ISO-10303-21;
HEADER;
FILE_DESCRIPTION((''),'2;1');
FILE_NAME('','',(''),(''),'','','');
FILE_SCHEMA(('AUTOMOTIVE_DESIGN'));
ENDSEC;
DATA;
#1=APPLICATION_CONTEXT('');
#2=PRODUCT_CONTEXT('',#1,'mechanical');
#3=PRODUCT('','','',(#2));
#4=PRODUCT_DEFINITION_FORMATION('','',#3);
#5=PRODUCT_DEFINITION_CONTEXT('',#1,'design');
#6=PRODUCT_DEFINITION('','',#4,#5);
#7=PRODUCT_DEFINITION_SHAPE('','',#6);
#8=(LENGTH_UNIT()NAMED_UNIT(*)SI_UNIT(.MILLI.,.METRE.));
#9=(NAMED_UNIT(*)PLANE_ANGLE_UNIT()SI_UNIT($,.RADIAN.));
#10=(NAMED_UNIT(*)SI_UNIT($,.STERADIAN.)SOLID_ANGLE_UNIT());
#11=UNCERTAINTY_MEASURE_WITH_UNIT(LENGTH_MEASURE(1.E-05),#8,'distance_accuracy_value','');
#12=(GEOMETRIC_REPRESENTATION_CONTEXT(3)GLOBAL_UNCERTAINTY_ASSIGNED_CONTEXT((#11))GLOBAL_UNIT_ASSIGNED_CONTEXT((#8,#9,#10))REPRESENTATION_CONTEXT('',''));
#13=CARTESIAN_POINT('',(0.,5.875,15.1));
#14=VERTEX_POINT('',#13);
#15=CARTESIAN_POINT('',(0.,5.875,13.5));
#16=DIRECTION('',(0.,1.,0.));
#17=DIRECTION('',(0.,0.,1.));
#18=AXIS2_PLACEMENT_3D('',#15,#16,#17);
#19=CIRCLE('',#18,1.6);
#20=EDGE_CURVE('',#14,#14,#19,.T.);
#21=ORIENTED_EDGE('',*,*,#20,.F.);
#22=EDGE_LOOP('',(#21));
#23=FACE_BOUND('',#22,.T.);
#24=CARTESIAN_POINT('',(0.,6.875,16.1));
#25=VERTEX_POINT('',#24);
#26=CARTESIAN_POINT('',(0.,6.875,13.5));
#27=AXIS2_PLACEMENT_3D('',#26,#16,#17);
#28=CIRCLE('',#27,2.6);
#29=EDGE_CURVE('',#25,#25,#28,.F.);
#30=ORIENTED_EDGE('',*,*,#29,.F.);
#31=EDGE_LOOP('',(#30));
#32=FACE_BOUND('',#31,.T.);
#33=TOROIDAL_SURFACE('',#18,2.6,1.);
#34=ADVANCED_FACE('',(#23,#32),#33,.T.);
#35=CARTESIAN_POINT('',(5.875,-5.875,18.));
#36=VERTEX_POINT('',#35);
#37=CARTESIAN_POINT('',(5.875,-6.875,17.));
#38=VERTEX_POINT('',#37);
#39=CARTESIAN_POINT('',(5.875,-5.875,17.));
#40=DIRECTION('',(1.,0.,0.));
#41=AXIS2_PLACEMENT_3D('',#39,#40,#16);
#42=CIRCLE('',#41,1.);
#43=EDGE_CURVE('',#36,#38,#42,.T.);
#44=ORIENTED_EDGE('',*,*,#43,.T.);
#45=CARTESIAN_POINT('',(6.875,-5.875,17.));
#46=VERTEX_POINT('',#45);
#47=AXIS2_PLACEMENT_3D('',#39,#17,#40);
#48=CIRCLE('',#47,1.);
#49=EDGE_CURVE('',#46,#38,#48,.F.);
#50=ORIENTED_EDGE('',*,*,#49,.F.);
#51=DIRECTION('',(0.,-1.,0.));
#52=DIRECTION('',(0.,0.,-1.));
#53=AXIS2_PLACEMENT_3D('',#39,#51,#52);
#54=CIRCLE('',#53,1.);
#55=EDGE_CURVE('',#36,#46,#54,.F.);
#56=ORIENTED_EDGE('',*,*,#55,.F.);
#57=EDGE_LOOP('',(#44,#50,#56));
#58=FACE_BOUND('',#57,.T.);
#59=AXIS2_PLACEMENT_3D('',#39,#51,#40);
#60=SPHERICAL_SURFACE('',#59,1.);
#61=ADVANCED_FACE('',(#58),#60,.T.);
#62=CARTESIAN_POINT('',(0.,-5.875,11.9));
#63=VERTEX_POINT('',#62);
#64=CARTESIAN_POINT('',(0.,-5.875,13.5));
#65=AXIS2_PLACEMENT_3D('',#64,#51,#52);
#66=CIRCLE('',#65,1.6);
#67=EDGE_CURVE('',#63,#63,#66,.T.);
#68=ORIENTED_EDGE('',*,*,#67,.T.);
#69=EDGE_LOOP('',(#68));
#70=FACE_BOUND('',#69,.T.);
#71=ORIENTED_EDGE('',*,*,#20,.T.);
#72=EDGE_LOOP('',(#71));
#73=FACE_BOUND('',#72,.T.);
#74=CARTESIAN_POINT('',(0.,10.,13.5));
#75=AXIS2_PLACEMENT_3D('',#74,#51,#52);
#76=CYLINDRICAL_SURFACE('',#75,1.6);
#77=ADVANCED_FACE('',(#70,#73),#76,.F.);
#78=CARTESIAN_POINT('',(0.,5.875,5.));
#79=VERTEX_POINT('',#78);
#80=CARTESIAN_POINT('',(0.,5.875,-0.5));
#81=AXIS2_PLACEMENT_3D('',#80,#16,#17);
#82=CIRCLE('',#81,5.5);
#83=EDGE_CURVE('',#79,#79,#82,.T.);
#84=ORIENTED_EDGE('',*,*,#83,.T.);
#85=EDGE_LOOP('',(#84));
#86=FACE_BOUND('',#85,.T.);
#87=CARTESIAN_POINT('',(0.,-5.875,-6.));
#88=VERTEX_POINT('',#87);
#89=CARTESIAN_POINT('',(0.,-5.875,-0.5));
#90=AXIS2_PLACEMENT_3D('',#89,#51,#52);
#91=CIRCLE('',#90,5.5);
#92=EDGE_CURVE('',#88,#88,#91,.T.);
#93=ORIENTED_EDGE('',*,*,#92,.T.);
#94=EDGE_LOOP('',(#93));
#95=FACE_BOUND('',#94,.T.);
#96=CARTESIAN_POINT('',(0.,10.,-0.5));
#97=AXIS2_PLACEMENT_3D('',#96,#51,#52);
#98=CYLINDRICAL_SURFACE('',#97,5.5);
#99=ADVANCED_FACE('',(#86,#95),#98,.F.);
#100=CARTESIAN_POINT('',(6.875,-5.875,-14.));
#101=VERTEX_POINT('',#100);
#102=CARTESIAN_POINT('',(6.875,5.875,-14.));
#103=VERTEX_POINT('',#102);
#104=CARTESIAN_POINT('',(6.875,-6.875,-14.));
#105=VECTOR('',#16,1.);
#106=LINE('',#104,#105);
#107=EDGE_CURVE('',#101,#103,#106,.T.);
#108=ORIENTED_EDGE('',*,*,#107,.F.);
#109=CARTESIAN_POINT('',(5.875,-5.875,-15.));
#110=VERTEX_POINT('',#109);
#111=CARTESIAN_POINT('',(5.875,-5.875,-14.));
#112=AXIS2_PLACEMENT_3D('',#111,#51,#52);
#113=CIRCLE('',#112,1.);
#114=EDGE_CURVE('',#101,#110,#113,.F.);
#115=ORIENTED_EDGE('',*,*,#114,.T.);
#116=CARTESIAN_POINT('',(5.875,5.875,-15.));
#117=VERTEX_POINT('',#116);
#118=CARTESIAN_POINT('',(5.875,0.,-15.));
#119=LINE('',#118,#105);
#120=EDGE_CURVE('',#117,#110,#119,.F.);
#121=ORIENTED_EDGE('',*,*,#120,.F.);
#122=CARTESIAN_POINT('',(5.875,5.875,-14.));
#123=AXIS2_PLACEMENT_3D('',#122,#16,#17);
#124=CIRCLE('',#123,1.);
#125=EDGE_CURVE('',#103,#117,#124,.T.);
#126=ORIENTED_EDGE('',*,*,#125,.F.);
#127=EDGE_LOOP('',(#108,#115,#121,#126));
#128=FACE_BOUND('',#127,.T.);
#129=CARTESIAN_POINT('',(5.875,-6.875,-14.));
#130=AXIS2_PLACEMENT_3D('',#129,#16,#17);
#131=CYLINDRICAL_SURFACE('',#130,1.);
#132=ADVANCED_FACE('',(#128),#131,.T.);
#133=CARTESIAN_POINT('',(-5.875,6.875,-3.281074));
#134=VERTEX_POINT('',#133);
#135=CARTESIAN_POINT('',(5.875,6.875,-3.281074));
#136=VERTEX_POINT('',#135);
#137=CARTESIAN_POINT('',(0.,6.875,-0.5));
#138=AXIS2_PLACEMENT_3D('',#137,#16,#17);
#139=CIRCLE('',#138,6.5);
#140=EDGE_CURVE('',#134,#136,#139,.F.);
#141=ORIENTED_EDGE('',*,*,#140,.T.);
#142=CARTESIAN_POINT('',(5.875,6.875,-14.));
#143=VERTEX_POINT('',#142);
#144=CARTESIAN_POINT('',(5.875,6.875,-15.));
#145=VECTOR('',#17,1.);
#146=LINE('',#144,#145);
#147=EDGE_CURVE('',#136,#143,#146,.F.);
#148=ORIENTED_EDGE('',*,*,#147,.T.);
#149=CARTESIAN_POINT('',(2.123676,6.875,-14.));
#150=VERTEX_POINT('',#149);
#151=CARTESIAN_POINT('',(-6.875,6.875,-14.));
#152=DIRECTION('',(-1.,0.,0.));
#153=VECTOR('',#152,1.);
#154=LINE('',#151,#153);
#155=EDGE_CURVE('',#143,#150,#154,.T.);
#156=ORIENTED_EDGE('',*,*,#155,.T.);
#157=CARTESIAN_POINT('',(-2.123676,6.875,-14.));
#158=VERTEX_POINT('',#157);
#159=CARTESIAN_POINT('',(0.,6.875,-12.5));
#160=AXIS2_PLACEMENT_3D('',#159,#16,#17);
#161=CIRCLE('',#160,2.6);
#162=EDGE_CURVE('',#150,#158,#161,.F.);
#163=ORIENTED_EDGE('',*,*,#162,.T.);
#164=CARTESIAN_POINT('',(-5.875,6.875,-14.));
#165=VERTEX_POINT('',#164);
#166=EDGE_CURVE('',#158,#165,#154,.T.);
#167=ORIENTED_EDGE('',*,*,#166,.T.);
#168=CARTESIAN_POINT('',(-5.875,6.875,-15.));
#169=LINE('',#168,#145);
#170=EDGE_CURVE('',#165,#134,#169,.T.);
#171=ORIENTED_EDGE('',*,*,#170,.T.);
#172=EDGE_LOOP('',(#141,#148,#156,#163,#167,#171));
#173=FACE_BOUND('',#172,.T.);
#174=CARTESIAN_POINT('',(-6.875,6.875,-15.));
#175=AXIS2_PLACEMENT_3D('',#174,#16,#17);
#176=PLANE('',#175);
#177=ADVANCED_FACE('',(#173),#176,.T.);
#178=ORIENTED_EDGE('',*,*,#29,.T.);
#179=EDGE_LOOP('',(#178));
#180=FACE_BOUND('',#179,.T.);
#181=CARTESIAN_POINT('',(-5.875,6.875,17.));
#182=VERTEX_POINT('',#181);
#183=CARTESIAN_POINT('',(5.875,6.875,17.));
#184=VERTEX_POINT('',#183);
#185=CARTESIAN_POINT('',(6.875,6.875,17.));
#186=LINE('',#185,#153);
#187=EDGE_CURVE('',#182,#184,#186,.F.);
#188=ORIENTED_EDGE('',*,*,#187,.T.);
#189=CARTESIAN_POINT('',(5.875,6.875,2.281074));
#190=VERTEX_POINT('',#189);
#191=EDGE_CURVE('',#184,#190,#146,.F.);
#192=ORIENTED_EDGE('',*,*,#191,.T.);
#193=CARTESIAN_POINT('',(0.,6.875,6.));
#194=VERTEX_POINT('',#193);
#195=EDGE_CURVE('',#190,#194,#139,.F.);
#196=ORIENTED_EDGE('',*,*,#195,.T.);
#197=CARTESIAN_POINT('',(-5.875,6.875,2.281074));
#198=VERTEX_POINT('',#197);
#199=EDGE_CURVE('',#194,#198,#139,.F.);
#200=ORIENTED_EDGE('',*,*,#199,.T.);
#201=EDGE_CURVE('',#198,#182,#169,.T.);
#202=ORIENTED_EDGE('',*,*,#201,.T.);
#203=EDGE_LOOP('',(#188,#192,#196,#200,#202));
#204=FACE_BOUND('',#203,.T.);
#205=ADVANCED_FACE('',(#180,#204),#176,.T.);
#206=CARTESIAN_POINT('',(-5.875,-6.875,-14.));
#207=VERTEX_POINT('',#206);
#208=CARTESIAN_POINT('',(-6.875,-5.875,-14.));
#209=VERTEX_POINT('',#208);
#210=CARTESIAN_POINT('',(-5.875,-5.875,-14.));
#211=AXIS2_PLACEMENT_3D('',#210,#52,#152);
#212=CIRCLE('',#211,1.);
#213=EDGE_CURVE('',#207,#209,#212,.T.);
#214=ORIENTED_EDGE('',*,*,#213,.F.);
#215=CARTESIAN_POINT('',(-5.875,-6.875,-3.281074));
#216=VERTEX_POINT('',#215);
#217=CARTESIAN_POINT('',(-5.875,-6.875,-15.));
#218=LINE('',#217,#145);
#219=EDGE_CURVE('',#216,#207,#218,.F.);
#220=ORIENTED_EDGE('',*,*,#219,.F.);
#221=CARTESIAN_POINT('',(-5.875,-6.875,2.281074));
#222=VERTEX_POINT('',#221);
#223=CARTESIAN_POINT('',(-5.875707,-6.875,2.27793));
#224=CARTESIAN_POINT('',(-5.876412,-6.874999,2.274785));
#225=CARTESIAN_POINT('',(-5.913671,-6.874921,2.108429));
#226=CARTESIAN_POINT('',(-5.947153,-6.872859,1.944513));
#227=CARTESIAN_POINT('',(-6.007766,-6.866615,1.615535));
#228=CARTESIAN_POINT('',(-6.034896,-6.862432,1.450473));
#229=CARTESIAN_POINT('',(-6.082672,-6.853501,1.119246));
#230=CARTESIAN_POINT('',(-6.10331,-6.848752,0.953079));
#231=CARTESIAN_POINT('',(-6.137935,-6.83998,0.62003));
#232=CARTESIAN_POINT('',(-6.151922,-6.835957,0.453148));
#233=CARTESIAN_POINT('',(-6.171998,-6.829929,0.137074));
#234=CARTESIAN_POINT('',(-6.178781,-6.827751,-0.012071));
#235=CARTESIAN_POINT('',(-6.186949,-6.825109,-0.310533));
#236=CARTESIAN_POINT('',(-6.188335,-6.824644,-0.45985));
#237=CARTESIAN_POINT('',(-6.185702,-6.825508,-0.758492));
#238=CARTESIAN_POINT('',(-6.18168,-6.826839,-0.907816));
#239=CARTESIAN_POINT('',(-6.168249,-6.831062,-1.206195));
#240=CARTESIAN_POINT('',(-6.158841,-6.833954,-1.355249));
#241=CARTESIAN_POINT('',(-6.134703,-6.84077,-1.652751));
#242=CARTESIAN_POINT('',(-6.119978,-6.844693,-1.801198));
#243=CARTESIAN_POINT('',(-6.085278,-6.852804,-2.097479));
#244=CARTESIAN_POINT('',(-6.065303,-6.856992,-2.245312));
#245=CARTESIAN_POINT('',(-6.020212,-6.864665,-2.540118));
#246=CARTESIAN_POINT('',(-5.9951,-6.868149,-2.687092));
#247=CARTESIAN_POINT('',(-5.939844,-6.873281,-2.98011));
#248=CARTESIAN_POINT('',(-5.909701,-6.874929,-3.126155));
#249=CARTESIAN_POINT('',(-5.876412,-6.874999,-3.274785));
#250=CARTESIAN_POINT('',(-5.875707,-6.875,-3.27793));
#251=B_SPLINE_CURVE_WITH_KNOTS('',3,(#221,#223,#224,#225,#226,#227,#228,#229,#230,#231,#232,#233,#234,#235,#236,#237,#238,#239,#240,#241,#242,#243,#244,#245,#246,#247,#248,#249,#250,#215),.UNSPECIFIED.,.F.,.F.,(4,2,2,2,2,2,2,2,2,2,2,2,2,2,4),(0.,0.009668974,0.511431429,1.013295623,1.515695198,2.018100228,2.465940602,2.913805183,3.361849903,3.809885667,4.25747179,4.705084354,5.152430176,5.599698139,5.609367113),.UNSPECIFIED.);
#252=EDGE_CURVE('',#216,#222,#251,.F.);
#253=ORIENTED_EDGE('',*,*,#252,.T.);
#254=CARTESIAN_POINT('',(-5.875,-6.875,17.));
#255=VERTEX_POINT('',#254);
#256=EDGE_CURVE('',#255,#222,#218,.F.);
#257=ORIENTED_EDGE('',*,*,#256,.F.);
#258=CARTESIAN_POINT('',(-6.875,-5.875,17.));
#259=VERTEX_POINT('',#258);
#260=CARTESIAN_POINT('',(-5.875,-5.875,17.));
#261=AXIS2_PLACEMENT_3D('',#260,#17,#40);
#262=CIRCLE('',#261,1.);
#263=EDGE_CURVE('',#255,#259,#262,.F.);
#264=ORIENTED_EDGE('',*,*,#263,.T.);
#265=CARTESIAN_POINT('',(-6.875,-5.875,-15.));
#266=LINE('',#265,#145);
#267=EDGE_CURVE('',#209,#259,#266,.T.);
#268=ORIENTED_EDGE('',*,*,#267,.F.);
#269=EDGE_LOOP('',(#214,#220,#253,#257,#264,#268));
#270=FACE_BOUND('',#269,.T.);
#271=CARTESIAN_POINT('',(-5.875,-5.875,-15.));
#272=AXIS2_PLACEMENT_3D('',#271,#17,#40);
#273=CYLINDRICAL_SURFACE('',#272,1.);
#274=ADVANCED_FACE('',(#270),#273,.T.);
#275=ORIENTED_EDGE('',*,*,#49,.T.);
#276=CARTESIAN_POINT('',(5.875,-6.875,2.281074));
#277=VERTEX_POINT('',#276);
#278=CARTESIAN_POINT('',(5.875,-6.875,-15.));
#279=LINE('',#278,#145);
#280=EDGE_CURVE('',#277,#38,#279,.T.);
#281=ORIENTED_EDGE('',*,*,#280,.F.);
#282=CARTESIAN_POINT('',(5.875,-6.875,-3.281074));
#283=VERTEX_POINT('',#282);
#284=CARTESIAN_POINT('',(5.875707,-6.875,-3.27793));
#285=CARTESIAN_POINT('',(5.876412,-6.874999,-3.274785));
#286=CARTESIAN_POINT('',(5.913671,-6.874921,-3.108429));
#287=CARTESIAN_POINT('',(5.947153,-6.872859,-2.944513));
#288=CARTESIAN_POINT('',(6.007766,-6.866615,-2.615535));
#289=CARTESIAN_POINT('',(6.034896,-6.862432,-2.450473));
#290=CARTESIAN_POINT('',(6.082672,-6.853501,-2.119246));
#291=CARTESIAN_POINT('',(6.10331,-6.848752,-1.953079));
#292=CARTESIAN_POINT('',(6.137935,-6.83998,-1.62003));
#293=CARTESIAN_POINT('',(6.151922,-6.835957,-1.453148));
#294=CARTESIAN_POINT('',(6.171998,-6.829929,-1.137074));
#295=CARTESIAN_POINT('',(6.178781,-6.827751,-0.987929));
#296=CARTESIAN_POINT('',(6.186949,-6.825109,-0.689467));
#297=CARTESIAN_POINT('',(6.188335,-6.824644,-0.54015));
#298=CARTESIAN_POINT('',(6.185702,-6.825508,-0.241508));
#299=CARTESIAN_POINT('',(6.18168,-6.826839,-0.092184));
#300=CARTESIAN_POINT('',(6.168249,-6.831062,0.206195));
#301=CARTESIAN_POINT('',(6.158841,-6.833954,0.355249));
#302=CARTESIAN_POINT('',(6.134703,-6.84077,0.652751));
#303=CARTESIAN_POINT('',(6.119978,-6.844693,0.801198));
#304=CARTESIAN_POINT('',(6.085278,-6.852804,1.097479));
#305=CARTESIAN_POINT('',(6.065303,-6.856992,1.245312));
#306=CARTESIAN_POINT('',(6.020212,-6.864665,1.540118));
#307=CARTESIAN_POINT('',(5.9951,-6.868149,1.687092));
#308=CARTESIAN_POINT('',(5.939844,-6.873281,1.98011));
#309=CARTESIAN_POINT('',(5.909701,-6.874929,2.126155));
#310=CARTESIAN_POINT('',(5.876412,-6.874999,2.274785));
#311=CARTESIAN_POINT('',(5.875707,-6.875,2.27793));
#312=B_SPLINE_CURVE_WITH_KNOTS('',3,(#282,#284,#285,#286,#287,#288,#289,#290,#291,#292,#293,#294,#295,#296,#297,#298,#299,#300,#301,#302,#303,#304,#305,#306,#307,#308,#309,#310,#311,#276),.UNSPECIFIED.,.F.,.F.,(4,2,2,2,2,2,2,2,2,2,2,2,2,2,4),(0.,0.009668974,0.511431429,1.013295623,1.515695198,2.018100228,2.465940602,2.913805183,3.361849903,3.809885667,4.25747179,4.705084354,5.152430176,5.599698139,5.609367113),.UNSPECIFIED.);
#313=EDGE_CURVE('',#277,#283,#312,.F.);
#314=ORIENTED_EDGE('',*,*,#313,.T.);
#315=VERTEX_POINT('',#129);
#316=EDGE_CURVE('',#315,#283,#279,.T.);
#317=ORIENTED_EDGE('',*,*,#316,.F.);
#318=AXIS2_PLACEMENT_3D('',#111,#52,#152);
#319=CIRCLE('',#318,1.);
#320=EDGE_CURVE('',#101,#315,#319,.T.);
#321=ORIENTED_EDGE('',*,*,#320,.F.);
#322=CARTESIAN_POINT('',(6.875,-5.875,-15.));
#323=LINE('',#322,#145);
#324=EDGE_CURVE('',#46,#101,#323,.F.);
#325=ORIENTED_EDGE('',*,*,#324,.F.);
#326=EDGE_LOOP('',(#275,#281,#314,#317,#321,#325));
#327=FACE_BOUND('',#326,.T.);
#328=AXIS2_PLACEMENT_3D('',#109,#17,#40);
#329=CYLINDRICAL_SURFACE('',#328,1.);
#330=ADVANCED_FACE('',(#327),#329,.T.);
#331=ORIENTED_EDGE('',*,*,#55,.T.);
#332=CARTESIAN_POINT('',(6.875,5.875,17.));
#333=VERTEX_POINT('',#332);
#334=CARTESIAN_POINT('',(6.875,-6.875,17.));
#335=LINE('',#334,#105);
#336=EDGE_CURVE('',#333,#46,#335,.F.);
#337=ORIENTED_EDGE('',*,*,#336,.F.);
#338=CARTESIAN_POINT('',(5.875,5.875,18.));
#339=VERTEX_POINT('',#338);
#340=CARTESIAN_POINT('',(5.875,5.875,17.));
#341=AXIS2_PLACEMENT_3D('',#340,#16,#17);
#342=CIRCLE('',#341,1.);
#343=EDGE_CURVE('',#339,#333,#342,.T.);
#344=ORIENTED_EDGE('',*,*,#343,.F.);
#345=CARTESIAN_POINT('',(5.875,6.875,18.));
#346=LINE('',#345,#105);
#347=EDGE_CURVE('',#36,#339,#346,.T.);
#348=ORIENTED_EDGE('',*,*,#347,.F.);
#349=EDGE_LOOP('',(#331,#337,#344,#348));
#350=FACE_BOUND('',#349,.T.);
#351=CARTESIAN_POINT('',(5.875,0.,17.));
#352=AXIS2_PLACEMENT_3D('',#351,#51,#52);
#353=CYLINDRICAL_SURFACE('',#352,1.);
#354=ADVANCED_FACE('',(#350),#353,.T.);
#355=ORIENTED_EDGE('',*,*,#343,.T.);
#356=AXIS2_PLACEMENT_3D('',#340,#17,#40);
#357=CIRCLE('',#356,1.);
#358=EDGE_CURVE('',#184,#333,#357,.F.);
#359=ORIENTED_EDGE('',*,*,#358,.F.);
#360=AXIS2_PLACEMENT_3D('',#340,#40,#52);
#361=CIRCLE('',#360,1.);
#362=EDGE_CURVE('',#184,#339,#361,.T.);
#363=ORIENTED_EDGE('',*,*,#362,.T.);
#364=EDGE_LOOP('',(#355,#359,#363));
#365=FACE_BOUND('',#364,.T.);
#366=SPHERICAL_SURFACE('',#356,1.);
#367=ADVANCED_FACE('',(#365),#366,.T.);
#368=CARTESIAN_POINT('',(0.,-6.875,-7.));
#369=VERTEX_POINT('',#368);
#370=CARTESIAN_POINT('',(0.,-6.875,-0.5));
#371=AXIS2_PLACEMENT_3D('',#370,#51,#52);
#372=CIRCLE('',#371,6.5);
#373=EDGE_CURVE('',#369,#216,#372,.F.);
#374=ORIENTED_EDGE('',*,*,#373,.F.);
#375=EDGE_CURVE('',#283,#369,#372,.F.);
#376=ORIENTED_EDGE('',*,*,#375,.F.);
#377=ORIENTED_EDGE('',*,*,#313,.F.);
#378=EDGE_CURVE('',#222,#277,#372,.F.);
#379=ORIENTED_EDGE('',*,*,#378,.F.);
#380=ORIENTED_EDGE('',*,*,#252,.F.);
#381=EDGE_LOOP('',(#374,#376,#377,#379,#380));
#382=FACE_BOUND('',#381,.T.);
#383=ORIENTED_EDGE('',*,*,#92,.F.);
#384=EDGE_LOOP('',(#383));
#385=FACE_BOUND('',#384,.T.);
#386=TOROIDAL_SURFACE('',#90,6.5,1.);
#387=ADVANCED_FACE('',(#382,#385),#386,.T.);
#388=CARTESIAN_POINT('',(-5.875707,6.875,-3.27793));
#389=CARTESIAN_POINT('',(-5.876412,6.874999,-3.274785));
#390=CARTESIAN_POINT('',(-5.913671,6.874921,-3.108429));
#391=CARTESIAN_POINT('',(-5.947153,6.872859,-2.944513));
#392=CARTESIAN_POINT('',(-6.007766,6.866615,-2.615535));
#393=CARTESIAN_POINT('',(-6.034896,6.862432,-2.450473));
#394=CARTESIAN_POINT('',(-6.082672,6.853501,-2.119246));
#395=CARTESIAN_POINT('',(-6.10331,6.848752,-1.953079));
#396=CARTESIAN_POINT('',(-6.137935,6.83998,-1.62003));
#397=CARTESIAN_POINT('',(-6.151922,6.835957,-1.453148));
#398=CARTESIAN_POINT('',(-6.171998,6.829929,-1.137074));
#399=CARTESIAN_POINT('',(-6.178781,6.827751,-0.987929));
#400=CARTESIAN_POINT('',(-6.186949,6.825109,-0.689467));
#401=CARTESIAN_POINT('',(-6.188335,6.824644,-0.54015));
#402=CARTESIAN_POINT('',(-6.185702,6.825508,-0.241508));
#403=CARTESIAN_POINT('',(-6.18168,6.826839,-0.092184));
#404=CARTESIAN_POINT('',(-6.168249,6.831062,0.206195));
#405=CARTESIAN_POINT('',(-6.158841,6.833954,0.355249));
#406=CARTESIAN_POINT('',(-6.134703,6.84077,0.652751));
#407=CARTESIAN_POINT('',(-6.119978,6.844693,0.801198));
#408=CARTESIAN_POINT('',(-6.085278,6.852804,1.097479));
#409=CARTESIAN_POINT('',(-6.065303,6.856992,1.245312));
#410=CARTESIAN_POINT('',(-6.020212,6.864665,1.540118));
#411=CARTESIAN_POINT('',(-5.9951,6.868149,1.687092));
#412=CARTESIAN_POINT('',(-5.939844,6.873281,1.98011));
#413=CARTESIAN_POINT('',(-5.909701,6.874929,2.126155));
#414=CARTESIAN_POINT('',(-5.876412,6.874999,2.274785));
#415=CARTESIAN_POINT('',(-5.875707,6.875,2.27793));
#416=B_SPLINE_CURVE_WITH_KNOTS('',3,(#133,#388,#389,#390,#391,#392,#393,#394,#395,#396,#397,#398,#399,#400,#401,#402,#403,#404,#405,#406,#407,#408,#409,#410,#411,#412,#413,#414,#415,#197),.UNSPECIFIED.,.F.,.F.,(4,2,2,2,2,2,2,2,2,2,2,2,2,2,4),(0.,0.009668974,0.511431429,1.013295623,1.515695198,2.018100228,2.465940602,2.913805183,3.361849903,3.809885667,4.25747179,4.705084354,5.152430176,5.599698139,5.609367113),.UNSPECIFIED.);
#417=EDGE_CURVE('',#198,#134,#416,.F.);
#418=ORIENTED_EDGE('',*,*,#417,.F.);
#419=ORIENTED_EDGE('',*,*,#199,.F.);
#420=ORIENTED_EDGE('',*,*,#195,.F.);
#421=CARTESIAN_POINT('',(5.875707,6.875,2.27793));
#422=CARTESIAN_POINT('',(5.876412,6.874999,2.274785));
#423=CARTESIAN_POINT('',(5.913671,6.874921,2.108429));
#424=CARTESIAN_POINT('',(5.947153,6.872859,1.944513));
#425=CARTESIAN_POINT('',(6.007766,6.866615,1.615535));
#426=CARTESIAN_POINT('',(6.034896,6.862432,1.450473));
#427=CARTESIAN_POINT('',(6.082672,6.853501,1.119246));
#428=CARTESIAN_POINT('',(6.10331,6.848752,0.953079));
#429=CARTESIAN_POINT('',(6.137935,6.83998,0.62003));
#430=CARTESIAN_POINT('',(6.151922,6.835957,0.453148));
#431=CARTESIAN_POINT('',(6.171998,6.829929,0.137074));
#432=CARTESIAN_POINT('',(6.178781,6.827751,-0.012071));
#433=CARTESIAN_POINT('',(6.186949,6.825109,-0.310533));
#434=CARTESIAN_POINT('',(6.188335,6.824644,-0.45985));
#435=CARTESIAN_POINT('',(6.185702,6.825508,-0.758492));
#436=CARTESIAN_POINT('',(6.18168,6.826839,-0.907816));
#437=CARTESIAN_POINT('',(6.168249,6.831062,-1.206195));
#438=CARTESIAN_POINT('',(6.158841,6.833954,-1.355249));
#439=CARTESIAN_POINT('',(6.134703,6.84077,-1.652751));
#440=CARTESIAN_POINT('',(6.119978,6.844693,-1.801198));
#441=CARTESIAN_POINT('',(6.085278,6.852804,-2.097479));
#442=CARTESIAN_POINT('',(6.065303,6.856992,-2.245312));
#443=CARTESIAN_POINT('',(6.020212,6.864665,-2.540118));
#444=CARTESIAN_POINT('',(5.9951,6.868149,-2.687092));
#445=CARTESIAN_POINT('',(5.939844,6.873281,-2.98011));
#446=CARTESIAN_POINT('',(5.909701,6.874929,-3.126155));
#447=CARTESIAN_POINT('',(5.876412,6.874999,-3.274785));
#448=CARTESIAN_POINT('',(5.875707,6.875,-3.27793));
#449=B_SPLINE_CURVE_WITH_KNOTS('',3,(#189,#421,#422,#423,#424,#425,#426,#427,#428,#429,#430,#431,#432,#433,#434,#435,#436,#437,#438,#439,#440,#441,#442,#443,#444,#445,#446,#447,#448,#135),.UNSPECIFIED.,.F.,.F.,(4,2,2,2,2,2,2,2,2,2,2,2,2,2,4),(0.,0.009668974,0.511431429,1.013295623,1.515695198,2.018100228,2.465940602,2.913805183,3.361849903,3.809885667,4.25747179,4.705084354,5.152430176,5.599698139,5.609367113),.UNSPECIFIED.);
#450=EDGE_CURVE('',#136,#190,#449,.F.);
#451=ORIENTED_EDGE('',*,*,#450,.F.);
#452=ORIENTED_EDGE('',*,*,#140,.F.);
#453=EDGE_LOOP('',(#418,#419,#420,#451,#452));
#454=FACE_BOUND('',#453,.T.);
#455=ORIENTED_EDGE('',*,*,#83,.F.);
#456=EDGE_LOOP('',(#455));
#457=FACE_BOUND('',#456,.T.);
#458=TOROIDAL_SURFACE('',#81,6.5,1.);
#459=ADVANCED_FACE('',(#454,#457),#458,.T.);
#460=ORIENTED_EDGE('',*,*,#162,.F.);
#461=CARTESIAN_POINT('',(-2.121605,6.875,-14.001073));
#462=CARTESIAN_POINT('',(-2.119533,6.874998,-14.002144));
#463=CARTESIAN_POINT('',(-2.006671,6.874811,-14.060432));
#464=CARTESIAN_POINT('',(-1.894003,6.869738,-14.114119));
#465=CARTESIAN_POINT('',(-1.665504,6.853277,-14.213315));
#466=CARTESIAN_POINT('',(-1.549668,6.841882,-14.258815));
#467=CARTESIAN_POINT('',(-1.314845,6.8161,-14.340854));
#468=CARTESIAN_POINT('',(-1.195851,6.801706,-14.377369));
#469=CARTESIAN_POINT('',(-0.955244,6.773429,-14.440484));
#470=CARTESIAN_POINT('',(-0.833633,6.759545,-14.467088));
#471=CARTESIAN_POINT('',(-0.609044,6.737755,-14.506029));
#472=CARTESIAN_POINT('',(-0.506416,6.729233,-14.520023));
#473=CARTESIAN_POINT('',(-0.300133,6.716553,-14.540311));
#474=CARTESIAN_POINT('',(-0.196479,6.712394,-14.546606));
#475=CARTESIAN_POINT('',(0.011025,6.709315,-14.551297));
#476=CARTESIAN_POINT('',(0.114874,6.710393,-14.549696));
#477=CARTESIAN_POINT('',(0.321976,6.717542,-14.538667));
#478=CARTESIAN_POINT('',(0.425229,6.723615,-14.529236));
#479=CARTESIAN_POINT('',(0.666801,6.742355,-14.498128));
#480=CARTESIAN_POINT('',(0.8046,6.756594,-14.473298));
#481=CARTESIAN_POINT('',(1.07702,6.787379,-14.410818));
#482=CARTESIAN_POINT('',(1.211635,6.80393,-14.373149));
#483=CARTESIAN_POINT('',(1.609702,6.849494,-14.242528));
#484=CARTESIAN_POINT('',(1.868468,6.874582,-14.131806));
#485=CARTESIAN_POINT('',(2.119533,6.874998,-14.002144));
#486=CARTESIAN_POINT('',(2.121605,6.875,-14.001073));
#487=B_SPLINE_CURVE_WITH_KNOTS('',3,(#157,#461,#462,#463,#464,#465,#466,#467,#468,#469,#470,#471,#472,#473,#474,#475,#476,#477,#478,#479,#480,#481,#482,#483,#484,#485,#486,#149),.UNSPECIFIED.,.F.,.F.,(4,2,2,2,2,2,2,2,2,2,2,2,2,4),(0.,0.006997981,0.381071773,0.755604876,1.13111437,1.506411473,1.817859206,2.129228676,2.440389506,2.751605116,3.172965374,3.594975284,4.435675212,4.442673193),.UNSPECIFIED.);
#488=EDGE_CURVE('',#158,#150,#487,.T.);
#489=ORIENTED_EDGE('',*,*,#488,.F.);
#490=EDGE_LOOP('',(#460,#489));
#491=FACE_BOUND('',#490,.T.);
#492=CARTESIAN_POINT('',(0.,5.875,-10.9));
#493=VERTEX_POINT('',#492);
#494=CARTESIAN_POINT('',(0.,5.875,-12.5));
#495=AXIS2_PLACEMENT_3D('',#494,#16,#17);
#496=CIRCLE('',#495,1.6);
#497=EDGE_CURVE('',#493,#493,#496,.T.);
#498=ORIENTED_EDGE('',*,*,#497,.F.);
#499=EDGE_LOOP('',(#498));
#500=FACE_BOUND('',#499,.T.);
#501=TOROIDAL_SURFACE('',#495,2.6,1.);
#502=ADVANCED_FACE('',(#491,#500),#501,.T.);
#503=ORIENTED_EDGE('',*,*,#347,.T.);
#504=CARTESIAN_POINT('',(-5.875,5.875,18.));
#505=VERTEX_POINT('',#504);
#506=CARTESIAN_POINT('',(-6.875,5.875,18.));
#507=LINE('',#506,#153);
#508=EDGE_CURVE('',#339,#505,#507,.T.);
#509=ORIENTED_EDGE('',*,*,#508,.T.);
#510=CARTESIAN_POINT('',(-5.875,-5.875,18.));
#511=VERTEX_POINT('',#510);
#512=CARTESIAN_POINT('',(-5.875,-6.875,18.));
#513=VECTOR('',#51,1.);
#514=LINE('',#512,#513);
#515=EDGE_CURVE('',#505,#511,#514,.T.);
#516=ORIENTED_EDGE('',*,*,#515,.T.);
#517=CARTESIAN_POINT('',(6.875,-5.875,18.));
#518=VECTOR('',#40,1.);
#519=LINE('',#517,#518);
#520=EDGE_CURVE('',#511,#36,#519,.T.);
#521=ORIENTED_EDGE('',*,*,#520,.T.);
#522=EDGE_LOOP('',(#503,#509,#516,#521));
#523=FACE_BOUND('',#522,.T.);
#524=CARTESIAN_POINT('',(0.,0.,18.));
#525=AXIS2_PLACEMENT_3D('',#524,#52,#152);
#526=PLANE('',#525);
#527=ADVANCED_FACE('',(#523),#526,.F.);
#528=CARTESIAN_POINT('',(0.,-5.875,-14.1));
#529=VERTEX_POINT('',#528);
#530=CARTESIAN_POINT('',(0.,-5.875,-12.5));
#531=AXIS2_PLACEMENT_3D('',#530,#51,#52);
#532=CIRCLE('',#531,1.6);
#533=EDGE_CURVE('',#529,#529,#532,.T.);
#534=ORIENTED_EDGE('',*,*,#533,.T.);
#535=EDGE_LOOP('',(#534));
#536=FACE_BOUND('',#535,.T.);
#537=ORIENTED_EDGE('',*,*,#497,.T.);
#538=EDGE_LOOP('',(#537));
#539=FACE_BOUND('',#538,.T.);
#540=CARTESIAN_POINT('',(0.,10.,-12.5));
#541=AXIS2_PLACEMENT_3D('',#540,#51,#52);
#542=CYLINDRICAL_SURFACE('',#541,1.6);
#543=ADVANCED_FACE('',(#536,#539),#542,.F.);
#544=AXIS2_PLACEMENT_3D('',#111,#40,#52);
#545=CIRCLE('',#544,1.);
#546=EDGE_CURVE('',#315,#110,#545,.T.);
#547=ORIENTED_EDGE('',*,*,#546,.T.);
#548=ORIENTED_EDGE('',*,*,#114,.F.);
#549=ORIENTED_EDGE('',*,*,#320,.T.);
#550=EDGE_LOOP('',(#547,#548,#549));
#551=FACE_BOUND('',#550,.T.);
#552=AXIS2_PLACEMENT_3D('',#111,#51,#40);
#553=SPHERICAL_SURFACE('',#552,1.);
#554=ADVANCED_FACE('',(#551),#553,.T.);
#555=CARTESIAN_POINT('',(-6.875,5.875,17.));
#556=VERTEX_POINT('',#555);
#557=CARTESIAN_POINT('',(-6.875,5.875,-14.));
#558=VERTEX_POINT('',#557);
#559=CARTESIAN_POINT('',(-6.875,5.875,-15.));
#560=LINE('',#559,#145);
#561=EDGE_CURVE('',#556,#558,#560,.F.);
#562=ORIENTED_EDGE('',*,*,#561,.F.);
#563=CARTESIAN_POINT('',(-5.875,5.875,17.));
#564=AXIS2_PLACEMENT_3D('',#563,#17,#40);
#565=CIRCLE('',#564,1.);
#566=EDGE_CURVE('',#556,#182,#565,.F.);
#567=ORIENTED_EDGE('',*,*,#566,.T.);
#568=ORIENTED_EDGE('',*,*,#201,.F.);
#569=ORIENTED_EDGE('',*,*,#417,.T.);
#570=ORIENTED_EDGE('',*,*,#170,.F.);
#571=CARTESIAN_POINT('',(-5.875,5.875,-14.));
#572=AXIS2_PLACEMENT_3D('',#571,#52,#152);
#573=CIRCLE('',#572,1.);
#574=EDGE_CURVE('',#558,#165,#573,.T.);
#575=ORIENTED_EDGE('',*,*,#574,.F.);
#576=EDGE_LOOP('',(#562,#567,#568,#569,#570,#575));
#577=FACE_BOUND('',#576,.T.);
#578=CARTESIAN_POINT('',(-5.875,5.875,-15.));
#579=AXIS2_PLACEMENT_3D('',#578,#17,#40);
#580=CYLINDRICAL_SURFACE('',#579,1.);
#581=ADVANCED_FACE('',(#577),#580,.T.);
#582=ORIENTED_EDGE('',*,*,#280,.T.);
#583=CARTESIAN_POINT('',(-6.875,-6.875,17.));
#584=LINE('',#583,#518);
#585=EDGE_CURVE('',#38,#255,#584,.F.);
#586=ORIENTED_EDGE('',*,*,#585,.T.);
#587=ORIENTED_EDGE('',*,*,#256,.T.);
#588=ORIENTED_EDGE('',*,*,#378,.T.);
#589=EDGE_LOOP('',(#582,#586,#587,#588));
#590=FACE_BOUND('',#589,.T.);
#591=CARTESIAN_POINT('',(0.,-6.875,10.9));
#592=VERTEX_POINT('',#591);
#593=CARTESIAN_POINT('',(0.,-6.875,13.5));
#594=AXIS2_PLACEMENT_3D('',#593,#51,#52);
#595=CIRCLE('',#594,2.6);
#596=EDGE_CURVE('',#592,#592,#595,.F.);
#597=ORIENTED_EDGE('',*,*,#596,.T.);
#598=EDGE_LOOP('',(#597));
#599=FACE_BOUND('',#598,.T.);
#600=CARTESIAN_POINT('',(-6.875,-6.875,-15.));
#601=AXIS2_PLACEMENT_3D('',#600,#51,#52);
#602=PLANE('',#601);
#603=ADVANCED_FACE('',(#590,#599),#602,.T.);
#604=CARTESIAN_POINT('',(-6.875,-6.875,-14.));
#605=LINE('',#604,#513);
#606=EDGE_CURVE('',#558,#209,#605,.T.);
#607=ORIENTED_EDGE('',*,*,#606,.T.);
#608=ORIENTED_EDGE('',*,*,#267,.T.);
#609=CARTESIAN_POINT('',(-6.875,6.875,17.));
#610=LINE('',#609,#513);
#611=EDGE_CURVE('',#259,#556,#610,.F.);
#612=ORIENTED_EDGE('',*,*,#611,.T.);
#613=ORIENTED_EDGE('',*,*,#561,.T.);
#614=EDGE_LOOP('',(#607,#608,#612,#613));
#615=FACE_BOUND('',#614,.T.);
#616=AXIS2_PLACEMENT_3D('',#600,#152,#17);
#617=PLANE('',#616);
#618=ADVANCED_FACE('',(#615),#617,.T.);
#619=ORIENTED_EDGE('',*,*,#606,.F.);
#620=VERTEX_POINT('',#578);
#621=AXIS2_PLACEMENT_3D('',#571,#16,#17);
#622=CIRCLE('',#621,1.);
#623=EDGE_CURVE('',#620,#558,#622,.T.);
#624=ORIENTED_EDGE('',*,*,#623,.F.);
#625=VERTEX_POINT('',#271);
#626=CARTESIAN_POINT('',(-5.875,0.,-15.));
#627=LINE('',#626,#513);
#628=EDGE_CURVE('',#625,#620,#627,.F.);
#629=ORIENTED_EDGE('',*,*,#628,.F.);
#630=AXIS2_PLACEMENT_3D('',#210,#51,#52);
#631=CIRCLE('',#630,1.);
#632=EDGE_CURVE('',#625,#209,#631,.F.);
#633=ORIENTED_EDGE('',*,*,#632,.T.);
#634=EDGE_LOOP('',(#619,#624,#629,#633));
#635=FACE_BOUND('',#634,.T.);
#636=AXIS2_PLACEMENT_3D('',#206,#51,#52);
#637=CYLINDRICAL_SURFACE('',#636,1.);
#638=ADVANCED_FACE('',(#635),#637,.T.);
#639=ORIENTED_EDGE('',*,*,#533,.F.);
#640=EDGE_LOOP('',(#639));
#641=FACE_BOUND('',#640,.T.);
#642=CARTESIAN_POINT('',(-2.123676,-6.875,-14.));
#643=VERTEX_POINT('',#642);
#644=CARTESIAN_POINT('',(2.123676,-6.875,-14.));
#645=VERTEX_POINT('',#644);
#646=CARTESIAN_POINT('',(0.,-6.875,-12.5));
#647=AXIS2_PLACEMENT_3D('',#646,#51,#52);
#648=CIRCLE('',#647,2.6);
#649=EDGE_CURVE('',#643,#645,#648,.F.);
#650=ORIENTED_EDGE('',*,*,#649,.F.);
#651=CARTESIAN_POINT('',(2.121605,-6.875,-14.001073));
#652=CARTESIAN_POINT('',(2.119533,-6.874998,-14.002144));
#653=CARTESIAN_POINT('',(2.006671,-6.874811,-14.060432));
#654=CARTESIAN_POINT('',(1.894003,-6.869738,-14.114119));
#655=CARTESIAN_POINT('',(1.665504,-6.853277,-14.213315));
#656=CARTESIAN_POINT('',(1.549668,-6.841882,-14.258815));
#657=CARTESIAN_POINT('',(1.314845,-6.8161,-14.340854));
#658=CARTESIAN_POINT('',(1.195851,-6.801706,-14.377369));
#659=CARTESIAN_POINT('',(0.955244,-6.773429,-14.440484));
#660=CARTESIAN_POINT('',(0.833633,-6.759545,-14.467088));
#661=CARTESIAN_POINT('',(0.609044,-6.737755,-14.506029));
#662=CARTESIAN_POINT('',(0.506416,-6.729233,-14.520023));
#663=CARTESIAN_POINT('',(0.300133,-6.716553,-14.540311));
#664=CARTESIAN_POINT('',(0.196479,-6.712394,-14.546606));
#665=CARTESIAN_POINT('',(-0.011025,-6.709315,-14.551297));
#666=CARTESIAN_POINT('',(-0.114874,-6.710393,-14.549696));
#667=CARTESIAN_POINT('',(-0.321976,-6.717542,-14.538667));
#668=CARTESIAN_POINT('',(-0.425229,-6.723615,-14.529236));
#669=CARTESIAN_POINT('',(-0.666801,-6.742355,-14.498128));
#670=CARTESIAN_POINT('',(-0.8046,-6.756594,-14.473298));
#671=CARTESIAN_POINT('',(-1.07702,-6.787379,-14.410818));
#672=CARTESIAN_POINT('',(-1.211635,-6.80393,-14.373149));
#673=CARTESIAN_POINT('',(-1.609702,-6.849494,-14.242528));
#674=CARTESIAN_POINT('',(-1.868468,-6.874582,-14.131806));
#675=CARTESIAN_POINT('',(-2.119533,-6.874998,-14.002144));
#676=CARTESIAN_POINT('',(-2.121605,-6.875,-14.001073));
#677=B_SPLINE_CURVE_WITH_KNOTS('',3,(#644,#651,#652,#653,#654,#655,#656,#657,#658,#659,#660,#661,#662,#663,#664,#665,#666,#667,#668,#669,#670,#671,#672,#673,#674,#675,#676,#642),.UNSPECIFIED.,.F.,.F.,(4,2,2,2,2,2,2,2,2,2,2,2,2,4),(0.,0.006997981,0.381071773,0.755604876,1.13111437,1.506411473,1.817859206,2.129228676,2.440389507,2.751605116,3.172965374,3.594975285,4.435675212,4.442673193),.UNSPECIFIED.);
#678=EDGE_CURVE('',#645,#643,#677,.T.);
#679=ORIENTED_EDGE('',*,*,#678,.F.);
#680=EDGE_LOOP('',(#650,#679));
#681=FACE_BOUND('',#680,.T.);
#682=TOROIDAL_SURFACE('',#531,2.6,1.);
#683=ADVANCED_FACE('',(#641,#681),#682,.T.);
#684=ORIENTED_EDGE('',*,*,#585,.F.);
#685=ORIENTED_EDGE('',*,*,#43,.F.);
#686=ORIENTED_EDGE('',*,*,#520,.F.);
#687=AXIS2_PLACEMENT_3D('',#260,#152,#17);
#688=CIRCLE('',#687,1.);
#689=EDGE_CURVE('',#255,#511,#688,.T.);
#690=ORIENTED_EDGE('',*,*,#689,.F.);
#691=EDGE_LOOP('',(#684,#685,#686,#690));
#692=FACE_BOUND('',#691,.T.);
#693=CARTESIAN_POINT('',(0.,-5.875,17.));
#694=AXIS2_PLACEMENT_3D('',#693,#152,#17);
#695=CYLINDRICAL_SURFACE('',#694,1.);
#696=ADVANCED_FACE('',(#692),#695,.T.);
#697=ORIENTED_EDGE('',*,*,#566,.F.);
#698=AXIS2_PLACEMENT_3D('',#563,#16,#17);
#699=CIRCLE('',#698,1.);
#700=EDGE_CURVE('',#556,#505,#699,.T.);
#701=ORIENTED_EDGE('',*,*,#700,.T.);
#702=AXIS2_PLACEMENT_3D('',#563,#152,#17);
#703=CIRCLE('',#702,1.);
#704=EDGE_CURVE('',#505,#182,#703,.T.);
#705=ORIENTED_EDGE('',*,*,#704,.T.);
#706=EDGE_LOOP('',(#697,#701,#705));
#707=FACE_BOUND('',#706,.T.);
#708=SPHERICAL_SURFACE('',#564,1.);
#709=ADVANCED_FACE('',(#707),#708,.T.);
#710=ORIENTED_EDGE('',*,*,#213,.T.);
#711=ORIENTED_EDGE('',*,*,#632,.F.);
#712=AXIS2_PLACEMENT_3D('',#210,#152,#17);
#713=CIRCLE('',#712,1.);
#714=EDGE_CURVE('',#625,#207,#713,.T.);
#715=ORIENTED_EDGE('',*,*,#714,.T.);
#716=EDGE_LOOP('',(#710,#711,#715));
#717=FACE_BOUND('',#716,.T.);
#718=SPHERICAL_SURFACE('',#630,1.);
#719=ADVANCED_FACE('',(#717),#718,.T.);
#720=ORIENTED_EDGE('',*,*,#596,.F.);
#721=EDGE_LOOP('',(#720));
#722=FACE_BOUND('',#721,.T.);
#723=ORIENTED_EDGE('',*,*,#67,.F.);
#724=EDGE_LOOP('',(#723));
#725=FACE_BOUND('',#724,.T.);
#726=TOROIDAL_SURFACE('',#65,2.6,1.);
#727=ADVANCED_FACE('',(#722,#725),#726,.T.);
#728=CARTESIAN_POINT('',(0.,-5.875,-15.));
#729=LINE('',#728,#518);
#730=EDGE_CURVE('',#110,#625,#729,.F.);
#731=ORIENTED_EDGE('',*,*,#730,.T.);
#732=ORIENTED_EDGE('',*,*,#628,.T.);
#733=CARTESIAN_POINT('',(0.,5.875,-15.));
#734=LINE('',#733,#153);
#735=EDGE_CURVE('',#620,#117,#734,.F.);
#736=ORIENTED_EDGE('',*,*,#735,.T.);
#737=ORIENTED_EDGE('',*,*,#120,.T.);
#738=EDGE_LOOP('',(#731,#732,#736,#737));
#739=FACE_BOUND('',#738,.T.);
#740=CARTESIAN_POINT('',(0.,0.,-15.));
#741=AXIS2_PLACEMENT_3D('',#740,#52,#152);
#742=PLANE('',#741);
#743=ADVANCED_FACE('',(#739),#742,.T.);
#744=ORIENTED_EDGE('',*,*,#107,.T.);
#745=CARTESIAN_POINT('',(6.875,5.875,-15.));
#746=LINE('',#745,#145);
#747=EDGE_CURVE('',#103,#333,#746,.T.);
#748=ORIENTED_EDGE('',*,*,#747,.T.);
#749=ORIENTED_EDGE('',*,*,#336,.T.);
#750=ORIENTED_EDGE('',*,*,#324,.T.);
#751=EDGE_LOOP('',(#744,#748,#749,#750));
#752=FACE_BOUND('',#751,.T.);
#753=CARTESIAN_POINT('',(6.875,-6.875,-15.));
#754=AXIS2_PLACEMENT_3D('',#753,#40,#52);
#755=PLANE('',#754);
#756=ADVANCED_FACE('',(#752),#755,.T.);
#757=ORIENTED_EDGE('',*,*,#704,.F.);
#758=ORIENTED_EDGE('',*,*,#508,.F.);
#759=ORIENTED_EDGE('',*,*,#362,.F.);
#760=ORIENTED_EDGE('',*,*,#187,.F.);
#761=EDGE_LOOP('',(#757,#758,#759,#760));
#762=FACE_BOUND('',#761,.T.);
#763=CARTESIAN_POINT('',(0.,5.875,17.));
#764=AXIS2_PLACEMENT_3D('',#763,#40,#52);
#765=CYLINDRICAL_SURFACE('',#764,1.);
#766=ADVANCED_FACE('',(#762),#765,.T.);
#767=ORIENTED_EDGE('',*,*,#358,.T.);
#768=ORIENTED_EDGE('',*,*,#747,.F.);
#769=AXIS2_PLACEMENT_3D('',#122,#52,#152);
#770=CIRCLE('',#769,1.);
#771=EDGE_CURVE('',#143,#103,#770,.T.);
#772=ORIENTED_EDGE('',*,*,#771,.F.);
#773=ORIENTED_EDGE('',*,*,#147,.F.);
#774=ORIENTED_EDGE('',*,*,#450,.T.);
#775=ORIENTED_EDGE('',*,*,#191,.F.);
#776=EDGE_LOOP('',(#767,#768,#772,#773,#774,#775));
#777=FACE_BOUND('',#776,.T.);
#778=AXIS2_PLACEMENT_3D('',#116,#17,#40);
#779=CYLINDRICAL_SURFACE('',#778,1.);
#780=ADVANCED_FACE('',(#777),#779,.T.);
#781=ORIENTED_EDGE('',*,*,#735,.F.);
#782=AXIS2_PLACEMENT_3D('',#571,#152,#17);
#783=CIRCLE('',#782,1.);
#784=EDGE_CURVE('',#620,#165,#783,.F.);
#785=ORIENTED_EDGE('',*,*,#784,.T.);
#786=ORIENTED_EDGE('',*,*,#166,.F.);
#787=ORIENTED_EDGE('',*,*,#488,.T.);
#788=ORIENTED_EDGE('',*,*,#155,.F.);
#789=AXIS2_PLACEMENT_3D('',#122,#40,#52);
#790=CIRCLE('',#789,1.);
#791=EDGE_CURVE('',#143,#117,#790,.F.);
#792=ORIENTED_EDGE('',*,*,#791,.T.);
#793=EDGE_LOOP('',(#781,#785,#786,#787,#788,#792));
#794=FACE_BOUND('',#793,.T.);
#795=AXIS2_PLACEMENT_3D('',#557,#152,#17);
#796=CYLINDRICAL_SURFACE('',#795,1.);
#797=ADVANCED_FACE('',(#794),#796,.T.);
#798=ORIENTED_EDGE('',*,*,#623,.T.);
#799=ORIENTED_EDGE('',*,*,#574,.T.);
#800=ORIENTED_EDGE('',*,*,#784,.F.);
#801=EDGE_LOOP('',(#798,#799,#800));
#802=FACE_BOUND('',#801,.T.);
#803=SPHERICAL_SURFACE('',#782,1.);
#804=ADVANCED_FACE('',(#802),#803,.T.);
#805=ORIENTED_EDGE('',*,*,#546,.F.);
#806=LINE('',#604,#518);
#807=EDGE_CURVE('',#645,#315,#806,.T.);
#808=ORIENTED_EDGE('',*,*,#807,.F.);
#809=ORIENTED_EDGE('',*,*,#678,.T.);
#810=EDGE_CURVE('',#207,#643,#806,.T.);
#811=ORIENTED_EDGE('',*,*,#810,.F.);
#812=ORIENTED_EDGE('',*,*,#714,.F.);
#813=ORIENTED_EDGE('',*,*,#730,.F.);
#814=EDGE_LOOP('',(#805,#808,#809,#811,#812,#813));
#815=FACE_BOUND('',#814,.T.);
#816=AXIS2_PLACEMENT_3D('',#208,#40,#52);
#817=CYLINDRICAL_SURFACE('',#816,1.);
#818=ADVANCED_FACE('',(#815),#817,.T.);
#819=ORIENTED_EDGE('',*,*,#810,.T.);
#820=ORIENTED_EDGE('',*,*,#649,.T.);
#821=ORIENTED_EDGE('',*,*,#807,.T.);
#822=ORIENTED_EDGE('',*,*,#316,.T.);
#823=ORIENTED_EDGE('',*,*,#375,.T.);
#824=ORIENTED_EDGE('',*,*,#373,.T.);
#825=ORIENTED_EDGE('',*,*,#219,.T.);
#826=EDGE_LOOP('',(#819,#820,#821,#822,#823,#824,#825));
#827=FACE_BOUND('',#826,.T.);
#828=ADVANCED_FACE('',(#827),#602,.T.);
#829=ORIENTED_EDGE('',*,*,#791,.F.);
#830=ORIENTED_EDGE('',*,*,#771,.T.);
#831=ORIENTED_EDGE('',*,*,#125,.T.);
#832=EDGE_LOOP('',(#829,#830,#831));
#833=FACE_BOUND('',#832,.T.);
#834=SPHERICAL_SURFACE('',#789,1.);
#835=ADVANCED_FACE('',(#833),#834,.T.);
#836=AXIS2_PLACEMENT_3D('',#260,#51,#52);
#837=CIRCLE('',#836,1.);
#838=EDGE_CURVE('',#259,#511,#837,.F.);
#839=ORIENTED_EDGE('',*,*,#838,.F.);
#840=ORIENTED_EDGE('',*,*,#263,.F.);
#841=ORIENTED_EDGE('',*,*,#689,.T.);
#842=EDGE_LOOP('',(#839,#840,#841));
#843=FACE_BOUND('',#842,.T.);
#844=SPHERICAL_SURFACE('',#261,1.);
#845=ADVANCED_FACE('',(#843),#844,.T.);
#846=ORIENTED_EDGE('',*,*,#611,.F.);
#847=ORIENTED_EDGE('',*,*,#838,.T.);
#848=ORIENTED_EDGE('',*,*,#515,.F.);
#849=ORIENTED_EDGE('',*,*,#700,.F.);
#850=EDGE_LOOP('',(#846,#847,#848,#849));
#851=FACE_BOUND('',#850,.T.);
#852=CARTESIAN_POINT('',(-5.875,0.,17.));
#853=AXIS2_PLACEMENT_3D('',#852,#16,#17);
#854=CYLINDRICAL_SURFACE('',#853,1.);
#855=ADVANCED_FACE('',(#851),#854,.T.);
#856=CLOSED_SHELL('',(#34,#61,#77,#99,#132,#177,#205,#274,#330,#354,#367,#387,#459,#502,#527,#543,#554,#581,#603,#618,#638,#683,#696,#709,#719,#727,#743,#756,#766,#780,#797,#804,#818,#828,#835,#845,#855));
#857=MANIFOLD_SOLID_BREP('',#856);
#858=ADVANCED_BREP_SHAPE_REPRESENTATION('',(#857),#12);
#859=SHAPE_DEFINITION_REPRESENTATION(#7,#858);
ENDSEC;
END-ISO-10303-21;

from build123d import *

# Parameters (mm, degrees)
BOSS_EXTRUDE1_DEPTH      = 18
BOSS_EXTRUDE1_DEPTH_BACK = 15
SKETCH1_W                = 13.75
SKETCH1_H                = 13.75
CUT_EXTRUDE1_DEPTH       = 10
CUT_EXTRUDE1_DEPTH_BACK  = 10
SKETCH2_R                = 1.6
SKETCH2_R_2              = 5.5
FILLET1_R                = 1


with BuildPart() as part:
    # Sketch1 → Boss-Extrude1 (new, two sides: drawn at the far end of the back side and taken through both)
    with BuildSketch(Plane.XY.offset(-BOSS_EXTRUDE1_DEPTH_BACK)):
        Rectangle(SKETCH1_W, SKETCH1_H)
    extrude(amount=BOSS_EXTRUDE1_DEPTH + BOSS_EXTRUDE1_DEPTH_BACK)

    # Sketch2 → Cut-Extrude1 (cut, two sides: drawn at the far end of the back side and taken through both)
    with BuildSketch(Plane(origin=(0, 0, 0), x_dir=(1, 0, 0), z_dir=(0, 1, 0)).offset(-CUT_EXTRUDE1_DEPTH_BACK)):
        with Locations(Location((0, 12.5, 0), (0, 0, 90))):
            Circle(SKETCH2_R)
        with Locations(Location((0, -13.5, 0), (0, 0, 90))):
            Circle(SKETCH2_R)
        with Locations(Location((0, 0.5, 0), (0, 0, 90))):
            Circle(SKETCH2_R_2)
    extrude(amount=CUT_EXTRUDE1_DEPTH + CUT_EXTRUDE1_DEPTH_BACK, mode=Mode.SUBTRACT)

    # Fillet1
    # the kernel refuses this fillet: 1 mm, written as the material it takes off along each edge
    with BuildSketch(Plane(origin=(5.875, -5.875, 17), x_dir=(1, 0, 0), z_dir=(0, -1, 0))) as fillet1_piece_1_section:
        Polygon((0, 0), (FILLET1_R, 0), (FILLET1_R, FILLET1_R), (0, FILLET1_R), align=None)
    fillet1_piece_1 = extrude(amount=FILLET1_R, mode=Mode.PRIVATE)
    fillet1_piece_1 = fillet1_piece_1 - Plane(origin=(5.875, -5.875, 17), x_dir=(-0.7071067811865475, 0, -0.7071067811865475), z_dir=(0, -1, 0)) * Sphere(FILLET1_R, mode=Mode.PRIVATE)
    add(fillet1_piece_1, mode=Mode.SUBTRACT)
    with BuildSketch(Plane(origin=(5.875, 5.875, 17), x_dir=(1, 0, 0), z_dir=(0, 1, 0))) as fillet1_piece_2_section:
        Polygon((0, 0), (FILLET1_R, 0), (FILLET1_R, -FILLET1_R), (0, -FILLET1_R), align=None)
    fillet1_piece_2 = extrude(amount=FILLET1_R, mode=Mode.PRIVATE)
    fillet1_piece_2 = fillet1_piece_2 - Plane(origin=(5.875, 5.875, 17), x_dir=(-0.7071067811865475, 0, -0.7071067811865475), z_dir=(0, 1, 0)) * Sphere(FILLET1_R, mode=Mode.PRIVATE)
    add(fillet1_piece_2, mode=Mode.SUBTRACT)
    with BuildSketch(Plane(origin=(-5.875, 5.875, -14), x_dir=(0, 1, 0), z_dir=(-1, 0, 0))) as fillet1_piece_3_section:
        Polygon((0, 0), (FILLET1_R, 0), (FILLET1_R, FILLET1_R), (0, FILLET1_R), align=None)
    fillet1_piece_3 = extrude(amount=FILLET1_R, mode=Mode.PRIVATE)
    fillet1_piece_3 = fillet1_piece_3 - Plane(origin=(-5.875, 5.875, -14), x_dir=(0, -0.7071067811865475, 0.7071067811865475), z_dir=(-1, 0, 0)) * Sphere(FILLET1_R, mode=Mode.PRIVATE)
    add(fillet1_piece_3, mode=Mode.SUBTRACT)
    with BuildSketch(Plane(origin=(-5.875, -5.875, -14), x_dir=(0, -1, 0), z_dir=(-1, 0, 0))) as fillet1_piece_4_section:
        Polygon((0, 0), (FILLET1_R, 0), (FILLET1_R, -FILLET1_R), (0, -FILLET1_R), align=None)
    fillet1_piece_4 = extrude(amount=FILLET1_R, mode=Mode.PRIVATE)
    fillet1_piece_4 = fillet1_piece_4 - Plane(origin=(-5.875, -5.875, -14), x_dir=(0, 0.7071067811865475, 0.7071067811865475), z_dir=(-1, 0, 0)) * Sphere(FILLET1_R, mode=Mode.PRIVATE)
    add(fillet1_piece_4, mode=Mode.SUBTRACT)
    with BuildSketch(Plane(origin=(-5.875, 5.875, 17), x_dir=(0, 1, 0), z_dir=(-1, 0, 0))) as fillet1_piece_5_section:
        Polygon((0, 0), (FILLET1_R, 0), (FILLET1_R, -FILLET1_R), (0, -FILLET1_R), align=None)
    fillet1_piece_5 = extrude(amount=FILLET1_R, mode=Mode.PRIVATE)
    fillet1_piece_5 = fillet1_piece_5 - Plane(origin=(-5.875, 5.875, 17), x_dir=(0, -0.7071067811865475, -0.7071067811865475), z_dir=(-1, 0, 0)) * Sphere(FILLET1_R, mode=Mode.PRIVATE)
    add(fillet1_piece_5, mode=Mode.SUBTRACT)
    with BuildSketch(Plane(origin=(-5.875, -5.875, 17), x_dir=(0, -1, 0), z_dir=(-1, 0, 0))) as fillet1_piece_6_section:
        Polygon((0, 0), (FILLET1_R, 0), (FILLET1_R, FILLET1_R), (0, FILLET1_R), align=None)
    fillet1_piece_6 = extrude(amount=FILLET1_R, mode=Mode.PRIVATE)
    fillet1_piece_6 = fillet1_piece_6 - Plane(origin=(-5.875, -5.875, 17), x_dir=(0, 0.7071067811865475, -0.7071067811865475), z_dir=(-1, 0, 0)) * Sphere(FILLET1_R, mode=Mode.PRIVATE)
    add(fillet1_piece_6, mode=Mode.SUBTRACT)
    with BuildSketch(Plane(origin=(5.875, -5.875, -14), x_dir=(1, 0, 0), z_dir=(0, -1, 0))) as fillet1_piece_7_section:
        Polygon((0, 0), (FILLET1_R, 0), (FILLET1_R, -FILLET1_R), (0, -FILLET1_R), align=None)
    fillet1_piece_7 = extrude(amount=FILLET1_R, mode=Mode.PRIVATE)
    fillet1_piece_7 = fillet1_piece_7 - Plane(origin=(5.875, -5.875, -14), x_dir=(-0.7071067811865475, 0, 0.7071067811865475), z_dir=(0, -1, 0)) * Sphere(FILLET1_R, mode=Mode.PRIVATE)
    add(fillet1_piece_7, mode=Mode.SUBTRACT)
    with BuildSketch(Plane(origin=(5.875, 5.875, -14), x_dir=(1, 0, 0), z_dir=(0, 1, 0))) as fillet1_piece_8_section:
        Polygon((0, 0), (FILLET1_R, 0), (FILLET1_R, FILLET1_R), (0, FILLET1_R), align=None)
    fillet1_piece_8 = extrude(amount=FILLET1_R, mode=Mode.PRIVATE)
    fillet1_piece_8 = fillet1_piece_8 - Plane(origin=(5.875, 5.875, -14), x_dir=(-0.7071067811865475, 0, 0.7071067811865475), z_dir=(0, 1, 0)) * Sphere(FILLET1_R, mode=Mode.PRIVATE)
    add(fillet1_piece_8, mode=Mode.SUBTRACT)
    with BuildSketch(Plane(origin=(6.875, -5.875, 18), x_dir=(0, 0, -1), z_dir=(0, 1, 0)), Plane(origin=(-6.875, 5.875, -15), x_dir=(1, 0, 0), z_dir=(0, -1, 0)), Plane(origin=(5.875, 6.875, 18), x_dir=(0, 0, -1), z_dir=(-1, 0, 0)), Plane(origin=(-5.875, -6.875, 18), x_dir=(0, 0, -1), z_dir=(1, 0, 0))) as fillet1_piece_9:
        with BuildLine():
            CenterArc((FILLET1_R, FILLET1_R), FILLET1_R, 180, 90)
            Line((0, FILLET1_R), (0, 0))
            Line((0, 0), (FILLET1_R, 0))
        make_face()
    extrude(amount=11.75, mode=Mode.SUBTRACT)
    with BuildSketch(Plane(origin=(-6.875, 5.875, 18), x_dir=(1, 0, 0), z_dir=(0, -1, 0)), Plane(origin=(-5.875, -6.875, -15), x_dir=(0, 0, 1), z_dir=(1, 0, 0)), Plane(origin=(6.875, -5.875, -15), x_dir=(0, 0, 1), z_dir=(0, 1, 0)), Plane(origin=(5.875, 6.875, -15), x_dir=(0, 0, 1), z_dir=(-1, 0, 0))) as fillet1_piece_10:
        with BuildLine():
            CenterArc((FILLET1_R, -FILLET1_R), FILLET1_R, 90, 90)
            Line((0, -FILLET1_R), (0, 0))
            Line((0, 0), (FILLET1_R, 0))
        make_face()
    extrude(amount=11.75, mode=Mode.SUBTRACT)
    with BuildSketch(Plane(origin=(0, -6.875, 13.5), x_dir=(0, 0, -1), z_dir=(1, 0, 0))) as fillet1_piece_11:
        with BuildLine():
            CenterArc((1.6 + FILLET1_R, FILLET1_R), FILLET1_R, 180, 90)
            Line((1.6, FILLET1_R), (1.6, 0))
            Line((1.6, 0), (1.6 + FILLET1_R, 0))
        make_face()
    revolve(axis=Axis((0, -6.875, 13.5), (0, 1, 0)), mode=Mode.SUBTRACT)
    with BuildSketch(Plane(origin=(0, 6.875, 13.5), x_dir=(0, 0, -1), z_dir=(-1, 0, 0))) as fillet1_piece_12:
        with BuildLine():
            CenterArc((1.6 + FILLET1_R, FILLET1_R), FILLET1_R, 180, 90)
            Line((1.6, FILLET1_R), (1.6, 0))
            Line((1.6, 0), (1.6 + FILLET1_R, 0))
        make_face()
    revolve(axis=Axis((0, 6.875, 13.5), (0, -1, 0)), mode=Mode.SUBTRACT)
    with BuildSketch(Plane(origin=(0, -6.875, -0.5), x_dir=(0, 0, -1), z_dir=(1, 0, 0))) as fillet1_piece_13:
        with BuildLine():
            CenterArc((5.5 + FILLET1_R, FILLET1_R), FILLET1_R, 180, 90)
            Line((5.5, FILLET1_R), (5.5, 0))
            Line((5.5, 0), (5.5 + FILLET1_R, 0))
        make_face()
    revolve(axis=Axis((0, -6.875, -0.5), (0, 1, 0)), mode=Mode.SUBTRACT)
    with BuildSketch(Plane(origin=(0, 6.875, -0.5), x_dir=(0, 0, -1), z_dir=(-1, 0, 0))) as fillet1_piece_14:
        with BuildLine():
            CenterArc((5.5 + FILLET1_R, FILLET1_R), FILLET1_R, 180, 90)
            Line((5.5, FILLET1_R), (5.5, 0))
            Line((5.5, 0), (5.5 + FILLET1_R, 0))
        make_face()
    revolve(axis=Axis((0, 6.875, -0.5), (0, -1, 0)), mode=Mode.SUBTRACT)
    with BuildSketch(Plane(origin=(0, -6.875, -12.5), x_dir=(0, 0, -1), z_dir=(1, 0, 0))) as fillet1_piece_15:
        with BuildLine():
            CenterArc((1.6 + FILLET1_R, FILLET1_R), FILLET1_R, 180, 90)
            Line((1.6, FILLET1_R), (1.6, 0))
            Line((1.6, 0), (1.6 + FILLET1_R, 0))
        make_face()
    revolve(axis=Axis((0, -6.875, -12.5), (0, 1, 0)), mode=Mode.SUBTRACT)
    with BuildSketch(Plane(origin=(0, 6.875, -12.5), x_dir=(0, 0, -1), z_dir=(-1, 0, 0))) as fillet1_piece_16:
        with BuildLine():
            CenterArc((1.6 + FILLET1_R, FILLET1_R), FILLET1_R, 180, 90)
            Line((1.6 + FILLET1_R, 0), (1.6, 0))
            Line((1.6, 0), (1.6, FILLET1_R))
        make_face()
    revolve(axis=Axis((0, 6.875, -12.5), (0, -1, 0)), mode=Mode.SUBTRACT)
    with BuildSketch(Plane(origin=(6.875, -6.875, -14), x_dir=(-1, 0, 0), z_dir=(0, 0, 1)), Plane(origin=(-6.875, -6.875, 17), x_dir=(1, 0, 0), z_dir=(0, 0, -1))) as fillet1_piece_17:
        with BuildLine():
            CenterArc((FILLET1_R, -FILLET1_R), FILLET1_R, 90, 90)
            Line((0, -FILLET1_R), (0, 0))
            Line((0, 0), (FILLET1_R, 0))
        make_face()
    extrude(amount=31, mode=Mode.SUBTRACT)
    with BuildSketch(Plane(origin=(-6.875, 6.875, 17), x_dir=(1, 0, 0), z_dir=(0, 0, -1)), Plane(origin=(6.875, 6.875, -14), x_dir=(-1, 0, 0), z_dir=(0, 0, 1))) as fillet1_piece_18:
        with BuildLine():
            CenterArc((FILLET1_R, FILLET1_R), FILLET1_R, 180, 90)
            Line((0, FILLET1_R), (0, 0))
            Line((0, 0), (FILLET1_R, 0))
        make_face()
    extrude(amount=31, mode=Mode.SUBTRACT)


solid = part.part
